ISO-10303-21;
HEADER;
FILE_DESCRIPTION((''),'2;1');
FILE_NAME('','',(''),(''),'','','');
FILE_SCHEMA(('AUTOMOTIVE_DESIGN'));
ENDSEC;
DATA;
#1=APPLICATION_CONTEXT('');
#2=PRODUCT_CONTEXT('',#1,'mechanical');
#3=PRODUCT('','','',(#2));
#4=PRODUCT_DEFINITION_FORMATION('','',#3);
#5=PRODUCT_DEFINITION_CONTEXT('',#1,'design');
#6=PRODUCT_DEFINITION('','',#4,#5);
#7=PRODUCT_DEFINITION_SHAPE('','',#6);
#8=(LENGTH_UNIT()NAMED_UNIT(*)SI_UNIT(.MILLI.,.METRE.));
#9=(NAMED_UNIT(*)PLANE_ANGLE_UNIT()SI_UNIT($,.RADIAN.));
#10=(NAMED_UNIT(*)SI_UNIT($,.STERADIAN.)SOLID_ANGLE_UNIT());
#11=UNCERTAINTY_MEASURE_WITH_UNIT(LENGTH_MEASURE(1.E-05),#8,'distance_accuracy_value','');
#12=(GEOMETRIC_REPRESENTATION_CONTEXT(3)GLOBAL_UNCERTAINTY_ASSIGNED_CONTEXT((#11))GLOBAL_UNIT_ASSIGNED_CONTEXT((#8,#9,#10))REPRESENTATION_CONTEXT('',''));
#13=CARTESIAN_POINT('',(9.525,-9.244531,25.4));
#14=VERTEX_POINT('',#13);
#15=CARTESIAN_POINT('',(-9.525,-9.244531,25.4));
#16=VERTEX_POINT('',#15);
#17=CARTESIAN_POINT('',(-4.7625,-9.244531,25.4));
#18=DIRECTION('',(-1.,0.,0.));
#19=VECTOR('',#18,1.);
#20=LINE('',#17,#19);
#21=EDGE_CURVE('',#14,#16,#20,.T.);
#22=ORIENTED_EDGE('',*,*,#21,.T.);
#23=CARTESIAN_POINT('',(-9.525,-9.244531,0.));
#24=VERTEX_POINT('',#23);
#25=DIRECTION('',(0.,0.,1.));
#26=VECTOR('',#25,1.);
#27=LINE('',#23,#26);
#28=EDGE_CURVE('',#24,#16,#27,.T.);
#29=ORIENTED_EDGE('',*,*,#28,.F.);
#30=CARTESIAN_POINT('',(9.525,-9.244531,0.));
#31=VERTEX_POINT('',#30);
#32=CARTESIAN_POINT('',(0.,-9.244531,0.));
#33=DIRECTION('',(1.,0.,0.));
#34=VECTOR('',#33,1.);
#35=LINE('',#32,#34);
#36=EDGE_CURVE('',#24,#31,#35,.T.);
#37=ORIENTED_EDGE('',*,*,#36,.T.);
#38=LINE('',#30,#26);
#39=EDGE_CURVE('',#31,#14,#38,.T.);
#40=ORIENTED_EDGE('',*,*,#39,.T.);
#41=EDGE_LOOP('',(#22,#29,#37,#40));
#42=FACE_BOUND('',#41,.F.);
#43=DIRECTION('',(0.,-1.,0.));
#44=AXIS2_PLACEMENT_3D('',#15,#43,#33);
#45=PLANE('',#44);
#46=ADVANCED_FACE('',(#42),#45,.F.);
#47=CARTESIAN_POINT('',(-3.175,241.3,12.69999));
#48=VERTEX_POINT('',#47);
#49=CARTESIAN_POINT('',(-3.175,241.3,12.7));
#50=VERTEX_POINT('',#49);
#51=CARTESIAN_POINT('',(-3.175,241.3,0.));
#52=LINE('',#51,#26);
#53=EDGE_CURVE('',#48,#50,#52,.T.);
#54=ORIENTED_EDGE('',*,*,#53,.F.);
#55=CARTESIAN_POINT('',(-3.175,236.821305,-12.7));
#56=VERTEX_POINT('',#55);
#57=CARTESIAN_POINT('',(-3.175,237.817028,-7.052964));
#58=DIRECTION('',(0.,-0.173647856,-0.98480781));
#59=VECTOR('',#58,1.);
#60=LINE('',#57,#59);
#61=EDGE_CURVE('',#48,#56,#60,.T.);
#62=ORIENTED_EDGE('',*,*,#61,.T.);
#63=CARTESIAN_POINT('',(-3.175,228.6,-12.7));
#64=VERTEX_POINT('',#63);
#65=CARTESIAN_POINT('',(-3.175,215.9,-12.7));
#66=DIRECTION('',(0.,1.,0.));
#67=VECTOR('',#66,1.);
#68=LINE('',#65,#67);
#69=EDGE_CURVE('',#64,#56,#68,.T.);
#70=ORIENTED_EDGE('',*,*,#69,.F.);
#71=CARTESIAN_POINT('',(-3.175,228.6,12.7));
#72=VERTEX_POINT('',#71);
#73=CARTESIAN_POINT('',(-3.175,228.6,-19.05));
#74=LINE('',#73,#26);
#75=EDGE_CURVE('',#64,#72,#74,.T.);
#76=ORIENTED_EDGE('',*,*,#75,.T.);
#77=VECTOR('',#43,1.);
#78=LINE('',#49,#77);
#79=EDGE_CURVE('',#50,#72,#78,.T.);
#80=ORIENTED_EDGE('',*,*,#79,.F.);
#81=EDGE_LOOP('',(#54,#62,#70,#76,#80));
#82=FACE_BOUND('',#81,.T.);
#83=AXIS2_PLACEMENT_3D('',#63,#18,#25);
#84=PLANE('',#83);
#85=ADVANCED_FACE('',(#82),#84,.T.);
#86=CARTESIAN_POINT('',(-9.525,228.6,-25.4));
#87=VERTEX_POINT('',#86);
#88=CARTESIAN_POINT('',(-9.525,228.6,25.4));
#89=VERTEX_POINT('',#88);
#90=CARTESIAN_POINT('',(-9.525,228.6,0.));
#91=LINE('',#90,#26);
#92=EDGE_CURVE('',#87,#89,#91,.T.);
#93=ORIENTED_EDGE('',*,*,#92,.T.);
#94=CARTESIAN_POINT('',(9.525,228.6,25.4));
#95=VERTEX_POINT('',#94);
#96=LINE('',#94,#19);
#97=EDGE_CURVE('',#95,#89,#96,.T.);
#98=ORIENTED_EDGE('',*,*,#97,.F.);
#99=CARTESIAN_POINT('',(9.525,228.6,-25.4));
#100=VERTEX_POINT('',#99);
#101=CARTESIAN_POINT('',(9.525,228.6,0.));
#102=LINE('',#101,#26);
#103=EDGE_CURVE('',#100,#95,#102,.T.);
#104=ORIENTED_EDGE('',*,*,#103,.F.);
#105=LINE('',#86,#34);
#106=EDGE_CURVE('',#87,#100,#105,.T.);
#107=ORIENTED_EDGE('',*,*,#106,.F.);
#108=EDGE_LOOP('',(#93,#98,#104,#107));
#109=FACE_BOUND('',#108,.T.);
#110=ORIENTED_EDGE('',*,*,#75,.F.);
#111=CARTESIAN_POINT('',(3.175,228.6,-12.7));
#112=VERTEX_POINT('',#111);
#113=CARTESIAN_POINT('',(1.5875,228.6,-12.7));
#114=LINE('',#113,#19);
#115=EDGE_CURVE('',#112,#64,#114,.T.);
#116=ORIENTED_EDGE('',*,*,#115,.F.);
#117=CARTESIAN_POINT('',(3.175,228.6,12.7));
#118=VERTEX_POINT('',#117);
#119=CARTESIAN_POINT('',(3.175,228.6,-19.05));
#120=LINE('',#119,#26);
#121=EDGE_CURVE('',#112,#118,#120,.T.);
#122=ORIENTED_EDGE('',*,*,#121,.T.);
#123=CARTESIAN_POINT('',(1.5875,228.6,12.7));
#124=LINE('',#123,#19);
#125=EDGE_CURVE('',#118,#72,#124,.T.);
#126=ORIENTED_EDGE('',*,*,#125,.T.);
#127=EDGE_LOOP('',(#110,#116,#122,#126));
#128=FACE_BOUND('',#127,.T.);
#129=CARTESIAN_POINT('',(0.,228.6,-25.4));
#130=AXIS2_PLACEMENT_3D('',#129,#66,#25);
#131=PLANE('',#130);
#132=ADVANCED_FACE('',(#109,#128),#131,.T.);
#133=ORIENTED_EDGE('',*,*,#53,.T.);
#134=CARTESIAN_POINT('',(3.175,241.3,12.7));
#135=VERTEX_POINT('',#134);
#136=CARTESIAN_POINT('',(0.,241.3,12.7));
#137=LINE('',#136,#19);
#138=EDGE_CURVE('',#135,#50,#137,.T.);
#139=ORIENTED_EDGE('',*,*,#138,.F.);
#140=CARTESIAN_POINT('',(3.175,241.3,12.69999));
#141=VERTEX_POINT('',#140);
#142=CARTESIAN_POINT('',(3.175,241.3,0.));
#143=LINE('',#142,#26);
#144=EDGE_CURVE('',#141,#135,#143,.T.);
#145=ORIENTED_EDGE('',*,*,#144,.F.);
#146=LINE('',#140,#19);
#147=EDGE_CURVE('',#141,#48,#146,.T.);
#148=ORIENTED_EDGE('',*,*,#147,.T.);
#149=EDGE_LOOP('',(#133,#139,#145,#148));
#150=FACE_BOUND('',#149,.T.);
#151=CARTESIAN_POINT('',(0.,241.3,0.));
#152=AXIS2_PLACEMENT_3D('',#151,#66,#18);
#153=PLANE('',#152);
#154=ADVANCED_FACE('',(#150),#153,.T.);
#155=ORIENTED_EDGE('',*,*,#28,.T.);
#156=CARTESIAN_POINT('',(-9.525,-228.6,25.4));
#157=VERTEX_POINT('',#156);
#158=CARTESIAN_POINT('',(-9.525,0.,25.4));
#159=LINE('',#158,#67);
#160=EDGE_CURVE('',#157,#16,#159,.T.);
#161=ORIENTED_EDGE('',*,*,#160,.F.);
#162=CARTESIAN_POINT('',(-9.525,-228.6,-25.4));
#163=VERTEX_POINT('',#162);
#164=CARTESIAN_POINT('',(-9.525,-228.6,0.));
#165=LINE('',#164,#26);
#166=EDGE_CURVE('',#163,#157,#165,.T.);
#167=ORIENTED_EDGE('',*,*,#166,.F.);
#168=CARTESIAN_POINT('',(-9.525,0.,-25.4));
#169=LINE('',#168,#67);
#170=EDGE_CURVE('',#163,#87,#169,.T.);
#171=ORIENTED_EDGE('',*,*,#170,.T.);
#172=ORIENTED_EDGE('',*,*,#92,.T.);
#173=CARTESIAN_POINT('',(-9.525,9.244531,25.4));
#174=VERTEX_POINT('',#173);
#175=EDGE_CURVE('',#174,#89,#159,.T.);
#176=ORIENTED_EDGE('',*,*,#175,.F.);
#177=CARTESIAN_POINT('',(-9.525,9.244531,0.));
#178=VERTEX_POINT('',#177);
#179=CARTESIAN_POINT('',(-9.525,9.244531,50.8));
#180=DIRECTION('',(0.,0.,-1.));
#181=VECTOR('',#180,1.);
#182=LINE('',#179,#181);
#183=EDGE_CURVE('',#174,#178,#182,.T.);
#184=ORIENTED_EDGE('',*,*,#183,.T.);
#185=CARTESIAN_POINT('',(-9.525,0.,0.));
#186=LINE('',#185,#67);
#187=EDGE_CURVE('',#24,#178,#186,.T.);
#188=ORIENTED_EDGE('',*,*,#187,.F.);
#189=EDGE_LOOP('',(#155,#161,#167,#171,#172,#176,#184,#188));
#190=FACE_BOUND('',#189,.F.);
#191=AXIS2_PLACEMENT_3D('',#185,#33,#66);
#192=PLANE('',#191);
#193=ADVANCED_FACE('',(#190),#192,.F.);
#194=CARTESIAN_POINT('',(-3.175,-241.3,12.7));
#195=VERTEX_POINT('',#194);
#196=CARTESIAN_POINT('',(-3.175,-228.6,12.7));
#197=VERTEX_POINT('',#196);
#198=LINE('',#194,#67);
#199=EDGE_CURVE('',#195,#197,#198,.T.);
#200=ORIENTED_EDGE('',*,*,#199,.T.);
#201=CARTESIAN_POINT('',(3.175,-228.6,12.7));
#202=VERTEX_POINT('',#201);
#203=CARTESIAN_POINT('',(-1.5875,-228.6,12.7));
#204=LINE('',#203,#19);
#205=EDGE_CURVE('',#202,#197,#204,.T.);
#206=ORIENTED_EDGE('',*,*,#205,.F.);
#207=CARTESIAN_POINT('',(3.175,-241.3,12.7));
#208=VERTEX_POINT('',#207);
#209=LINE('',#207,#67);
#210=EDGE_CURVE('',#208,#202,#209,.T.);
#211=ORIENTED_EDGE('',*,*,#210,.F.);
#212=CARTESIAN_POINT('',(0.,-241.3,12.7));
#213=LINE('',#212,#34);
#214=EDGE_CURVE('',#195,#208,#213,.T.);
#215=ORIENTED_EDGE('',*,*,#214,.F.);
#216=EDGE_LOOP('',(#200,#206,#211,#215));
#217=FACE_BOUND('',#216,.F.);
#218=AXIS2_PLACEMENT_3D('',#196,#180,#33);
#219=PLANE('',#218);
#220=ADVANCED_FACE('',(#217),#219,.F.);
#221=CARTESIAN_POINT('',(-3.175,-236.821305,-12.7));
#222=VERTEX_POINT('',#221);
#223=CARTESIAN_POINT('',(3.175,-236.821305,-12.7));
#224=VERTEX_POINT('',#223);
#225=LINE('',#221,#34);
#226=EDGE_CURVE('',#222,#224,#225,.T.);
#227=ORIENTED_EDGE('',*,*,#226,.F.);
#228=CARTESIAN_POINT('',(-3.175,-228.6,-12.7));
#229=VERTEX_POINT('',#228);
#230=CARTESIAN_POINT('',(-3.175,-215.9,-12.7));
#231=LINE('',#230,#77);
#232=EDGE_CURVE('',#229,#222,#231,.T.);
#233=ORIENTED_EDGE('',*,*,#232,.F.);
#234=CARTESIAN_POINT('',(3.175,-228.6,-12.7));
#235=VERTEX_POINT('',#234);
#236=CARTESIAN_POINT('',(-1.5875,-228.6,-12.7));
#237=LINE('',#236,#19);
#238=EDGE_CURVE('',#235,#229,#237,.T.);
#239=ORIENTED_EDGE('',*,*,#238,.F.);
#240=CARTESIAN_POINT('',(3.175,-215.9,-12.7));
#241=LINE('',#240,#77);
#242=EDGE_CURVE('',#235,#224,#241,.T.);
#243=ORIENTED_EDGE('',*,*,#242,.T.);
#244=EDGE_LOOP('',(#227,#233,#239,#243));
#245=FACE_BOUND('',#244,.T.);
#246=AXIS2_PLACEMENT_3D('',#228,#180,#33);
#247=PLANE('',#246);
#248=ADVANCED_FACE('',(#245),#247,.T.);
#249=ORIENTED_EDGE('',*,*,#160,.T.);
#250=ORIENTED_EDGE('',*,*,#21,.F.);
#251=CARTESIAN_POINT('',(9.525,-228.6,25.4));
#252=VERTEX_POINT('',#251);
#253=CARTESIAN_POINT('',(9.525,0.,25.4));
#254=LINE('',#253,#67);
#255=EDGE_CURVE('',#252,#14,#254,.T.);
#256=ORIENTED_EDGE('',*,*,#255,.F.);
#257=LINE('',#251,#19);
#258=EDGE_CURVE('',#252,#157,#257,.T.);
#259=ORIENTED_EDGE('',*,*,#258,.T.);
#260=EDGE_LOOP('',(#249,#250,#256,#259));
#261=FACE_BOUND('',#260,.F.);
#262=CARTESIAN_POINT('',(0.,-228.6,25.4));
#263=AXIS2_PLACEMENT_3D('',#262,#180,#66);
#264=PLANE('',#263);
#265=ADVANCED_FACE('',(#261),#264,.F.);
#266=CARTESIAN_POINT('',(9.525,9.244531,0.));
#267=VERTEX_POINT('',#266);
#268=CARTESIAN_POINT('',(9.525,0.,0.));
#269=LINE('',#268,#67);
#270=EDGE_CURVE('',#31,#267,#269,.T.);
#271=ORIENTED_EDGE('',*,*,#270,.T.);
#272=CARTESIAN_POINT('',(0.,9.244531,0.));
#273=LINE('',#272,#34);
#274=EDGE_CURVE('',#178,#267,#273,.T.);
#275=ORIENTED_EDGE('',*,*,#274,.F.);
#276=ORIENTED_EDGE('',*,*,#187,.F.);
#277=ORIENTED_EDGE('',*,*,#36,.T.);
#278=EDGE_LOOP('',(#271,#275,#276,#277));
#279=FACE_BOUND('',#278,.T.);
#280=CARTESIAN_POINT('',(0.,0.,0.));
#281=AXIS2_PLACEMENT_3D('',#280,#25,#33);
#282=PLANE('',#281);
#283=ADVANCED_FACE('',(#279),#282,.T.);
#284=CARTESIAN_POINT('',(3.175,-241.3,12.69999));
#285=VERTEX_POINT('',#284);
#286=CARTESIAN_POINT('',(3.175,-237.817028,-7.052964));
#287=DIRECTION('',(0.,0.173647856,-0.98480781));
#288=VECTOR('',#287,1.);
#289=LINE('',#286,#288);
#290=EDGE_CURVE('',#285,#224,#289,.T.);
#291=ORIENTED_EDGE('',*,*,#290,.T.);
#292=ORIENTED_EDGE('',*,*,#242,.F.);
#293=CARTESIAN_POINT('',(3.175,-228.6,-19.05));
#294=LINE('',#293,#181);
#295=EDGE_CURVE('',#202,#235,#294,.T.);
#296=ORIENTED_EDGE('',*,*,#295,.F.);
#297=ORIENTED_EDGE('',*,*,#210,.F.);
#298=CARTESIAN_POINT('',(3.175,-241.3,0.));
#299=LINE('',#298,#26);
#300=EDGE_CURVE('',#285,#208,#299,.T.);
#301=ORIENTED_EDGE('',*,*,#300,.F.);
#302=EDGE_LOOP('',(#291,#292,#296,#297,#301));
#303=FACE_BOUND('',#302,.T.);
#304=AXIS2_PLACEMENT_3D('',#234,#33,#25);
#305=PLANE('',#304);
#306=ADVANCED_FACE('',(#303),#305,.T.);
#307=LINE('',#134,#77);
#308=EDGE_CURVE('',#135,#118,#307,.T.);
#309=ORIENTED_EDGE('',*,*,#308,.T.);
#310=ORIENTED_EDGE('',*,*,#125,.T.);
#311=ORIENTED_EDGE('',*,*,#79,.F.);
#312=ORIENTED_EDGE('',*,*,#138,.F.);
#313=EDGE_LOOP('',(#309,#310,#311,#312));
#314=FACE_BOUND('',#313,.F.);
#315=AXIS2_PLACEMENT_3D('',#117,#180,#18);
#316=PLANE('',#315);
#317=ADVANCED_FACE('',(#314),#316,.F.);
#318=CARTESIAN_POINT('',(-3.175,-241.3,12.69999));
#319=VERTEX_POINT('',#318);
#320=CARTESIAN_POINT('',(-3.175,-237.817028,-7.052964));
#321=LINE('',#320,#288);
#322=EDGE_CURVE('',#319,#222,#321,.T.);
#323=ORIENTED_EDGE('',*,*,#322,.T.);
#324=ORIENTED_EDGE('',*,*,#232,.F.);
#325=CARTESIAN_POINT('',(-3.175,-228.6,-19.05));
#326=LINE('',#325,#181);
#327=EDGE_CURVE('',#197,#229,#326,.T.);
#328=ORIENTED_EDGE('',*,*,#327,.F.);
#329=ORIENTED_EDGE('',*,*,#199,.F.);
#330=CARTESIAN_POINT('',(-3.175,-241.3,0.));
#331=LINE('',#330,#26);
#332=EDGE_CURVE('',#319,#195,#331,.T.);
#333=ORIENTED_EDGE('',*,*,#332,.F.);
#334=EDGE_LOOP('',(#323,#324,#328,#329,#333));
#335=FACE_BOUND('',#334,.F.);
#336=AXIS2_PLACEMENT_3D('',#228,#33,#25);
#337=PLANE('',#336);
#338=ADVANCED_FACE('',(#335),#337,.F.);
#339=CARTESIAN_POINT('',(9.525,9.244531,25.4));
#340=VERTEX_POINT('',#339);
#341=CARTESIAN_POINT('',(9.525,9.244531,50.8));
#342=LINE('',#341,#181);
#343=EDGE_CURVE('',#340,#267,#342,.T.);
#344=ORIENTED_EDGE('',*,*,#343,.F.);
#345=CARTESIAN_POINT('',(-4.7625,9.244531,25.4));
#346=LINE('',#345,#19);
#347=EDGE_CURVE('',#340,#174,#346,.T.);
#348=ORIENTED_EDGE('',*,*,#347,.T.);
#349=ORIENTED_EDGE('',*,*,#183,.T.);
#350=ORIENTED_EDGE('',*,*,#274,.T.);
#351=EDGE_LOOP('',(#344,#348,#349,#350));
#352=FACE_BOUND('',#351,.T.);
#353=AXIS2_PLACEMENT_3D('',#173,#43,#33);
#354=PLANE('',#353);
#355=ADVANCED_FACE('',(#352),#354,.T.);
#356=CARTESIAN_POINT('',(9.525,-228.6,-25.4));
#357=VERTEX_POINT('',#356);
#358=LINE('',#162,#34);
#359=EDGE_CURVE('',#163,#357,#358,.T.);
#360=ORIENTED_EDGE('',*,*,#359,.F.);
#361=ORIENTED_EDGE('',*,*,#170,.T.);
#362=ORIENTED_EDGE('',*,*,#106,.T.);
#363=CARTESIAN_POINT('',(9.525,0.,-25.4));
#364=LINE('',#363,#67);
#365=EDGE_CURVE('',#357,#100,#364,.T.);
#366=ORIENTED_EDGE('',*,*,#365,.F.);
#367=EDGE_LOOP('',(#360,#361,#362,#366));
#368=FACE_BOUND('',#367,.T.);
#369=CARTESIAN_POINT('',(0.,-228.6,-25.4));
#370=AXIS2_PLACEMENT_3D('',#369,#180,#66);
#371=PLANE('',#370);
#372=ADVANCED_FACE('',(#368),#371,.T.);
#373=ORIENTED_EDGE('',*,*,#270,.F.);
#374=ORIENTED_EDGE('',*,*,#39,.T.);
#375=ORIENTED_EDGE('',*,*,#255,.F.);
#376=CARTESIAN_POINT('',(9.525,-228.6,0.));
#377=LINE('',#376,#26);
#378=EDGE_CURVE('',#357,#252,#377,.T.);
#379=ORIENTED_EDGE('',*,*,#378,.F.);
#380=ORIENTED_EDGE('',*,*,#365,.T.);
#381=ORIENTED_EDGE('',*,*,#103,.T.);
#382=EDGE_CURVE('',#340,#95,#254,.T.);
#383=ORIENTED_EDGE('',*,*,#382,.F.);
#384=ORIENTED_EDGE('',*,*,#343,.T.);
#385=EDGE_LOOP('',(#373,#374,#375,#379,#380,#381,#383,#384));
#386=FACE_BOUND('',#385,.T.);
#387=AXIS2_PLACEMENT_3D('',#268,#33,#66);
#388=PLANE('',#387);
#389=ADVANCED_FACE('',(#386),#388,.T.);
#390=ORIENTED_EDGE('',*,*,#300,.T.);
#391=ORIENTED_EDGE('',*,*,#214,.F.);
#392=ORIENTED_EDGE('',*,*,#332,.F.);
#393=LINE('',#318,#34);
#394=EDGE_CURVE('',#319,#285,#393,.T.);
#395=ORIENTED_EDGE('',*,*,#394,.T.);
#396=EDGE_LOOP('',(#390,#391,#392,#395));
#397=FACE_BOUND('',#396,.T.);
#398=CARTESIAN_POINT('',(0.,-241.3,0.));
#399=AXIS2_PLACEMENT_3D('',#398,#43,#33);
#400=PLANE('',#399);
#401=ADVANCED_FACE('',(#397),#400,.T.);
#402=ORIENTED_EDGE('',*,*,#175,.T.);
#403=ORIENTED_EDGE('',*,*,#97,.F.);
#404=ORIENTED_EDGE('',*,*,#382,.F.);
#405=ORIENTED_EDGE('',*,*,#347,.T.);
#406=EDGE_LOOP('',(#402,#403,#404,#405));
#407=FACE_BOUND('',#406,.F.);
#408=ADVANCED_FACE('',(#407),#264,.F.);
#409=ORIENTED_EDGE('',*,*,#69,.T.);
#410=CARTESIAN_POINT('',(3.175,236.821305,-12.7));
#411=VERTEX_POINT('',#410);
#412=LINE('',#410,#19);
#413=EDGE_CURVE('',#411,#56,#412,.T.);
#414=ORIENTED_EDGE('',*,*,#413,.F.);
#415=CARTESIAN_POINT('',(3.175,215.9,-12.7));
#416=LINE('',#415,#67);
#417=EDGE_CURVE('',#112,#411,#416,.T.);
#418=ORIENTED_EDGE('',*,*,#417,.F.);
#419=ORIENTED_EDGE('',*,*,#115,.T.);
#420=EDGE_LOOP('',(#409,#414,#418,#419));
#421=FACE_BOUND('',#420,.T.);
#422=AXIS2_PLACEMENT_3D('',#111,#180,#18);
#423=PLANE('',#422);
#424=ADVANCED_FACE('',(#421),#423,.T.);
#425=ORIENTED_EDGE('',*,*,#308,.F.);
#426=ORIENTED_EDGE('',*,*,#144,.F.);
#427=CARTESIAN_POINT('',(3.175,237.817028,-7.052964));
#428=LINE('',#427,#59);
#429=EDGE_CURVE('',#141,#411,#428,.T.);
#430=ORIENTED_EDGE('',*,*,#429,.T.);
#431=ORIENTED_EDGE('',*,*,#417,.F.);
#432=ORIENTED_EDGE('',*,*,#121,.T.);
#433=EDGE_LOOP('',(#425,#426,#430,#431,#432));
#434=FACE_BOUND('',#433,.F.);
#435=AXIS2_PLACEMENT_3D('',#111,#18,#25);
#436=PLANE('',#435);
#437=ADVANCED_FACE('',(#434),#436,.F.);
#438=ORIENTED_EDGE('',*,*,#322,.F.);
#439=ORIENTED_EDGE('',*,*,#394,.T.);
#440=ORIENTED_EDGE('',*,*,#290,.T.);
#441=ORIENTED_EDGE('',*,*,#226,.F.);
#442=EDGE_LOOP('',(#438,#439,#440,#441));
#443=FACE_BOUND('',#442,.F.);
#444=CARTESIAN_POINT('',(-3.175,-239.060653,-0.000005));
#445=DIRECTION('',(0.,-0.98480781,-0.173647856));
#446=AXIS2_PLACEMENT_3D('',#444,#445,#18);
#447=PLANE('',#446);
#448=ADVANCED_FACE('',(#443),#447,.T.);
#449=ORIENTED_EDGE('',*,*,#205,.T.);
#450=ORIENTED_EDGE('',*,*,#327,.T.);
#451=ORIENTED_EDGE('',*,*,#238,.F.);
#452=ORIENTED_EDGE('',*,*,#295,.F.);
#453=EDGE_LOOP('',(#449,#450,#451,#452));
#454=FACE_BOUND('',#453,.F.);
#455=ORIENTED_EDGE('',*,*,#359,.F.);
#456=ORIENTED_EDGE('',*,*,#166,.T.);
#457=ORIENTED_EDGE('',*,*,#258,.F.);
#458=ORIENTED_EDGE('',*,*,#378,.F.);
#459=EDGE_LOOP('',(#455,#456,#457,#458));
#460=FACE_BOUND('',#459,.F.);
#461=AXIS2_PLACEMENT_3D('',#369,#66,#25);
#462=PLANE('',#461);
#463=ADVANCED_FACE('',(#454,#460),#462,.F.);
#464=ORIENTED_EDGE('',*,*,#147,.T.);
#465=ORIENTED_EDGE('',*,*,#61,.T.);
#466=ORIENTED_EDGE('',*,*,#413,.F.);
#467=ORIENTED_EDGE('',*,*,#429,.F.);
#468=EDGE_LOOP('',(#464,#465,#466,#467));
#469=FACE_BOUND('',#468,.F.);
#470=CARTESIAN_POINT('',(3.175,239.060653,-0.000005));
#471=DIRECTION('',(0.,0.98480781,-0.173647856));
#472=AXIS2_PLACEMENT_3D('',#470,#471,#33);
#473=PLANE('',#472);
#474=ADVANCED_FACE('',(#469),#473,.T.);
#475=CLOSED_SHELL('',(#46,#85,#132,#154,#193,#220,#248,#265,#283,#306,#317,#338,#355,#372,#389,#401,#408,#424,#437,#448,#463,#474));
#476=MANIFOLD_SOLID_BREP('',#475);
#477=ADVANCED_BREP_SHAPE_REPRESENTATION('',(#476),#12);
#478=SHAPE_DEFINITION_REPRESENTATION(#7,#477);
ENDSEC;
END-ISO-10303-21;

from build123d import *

# Parameters (mm, degrees)
F0_W     = 457.2
F0_H     = 50.8
F1_DEPTH = 9.525
F2_W     = 19.05
F2_H     = 18.4890627861
F3_DEPTH = 25.4
F4_W     = 6.35
F4_H     = 25.4
F5_DEPTH = 12.7
F6_W     = 6.35
F6_H     = 25.4
F7_DEPTH = 12.7
F8_SIZE2 = 4.478695
F8_SIZE  = 25.39999
F9_SIZE2 = 4.478695
F9_SIZE  = 25.39999


# Not quite as in the source:
# - a fillet or chamfer is up to 0.001 mm smaller than in the source, because OpenCascade refuses the exact size


with BuildPart() as f1:
    # F0 (on Right) → F1 (new body, symmetric)
    with BuildSketch(Plane.YZ):
        Rectangle(F0_W, F0_H)
    extrude(amount=F1_DEPTH, both=True)

    # F2 (on face) → F3 (cut, symmetric)
    with BuildSketch(Plane.XY.offset(25.4)):
        Rectangle(F2_W, F2_H)
    extrude(amount=F3_DEPTH, both=True, mode=Mode.SUBTRACT)

    # F4 (on face) → F5 (join, symmetric)
    with BuildSketch(Plane.XZ.offset(228.6)):
        Rectangle(F4_W, F4_H)
    extrude(amount=F5_DEPTH, both=True)

    # F6 (on face) → F7 (join, symmetric)
    with BuildSketch(Plane(origin=(0, 228.6, 0), x_dir=(-1, 0, 0), z_dir=(0, 1, 0))):
        Rectangle(F6_W, F6_H)
    extrude(amount=F7_DEPTH, both=True)

    # F8 (size 25.4 and 4.47870531 in the source; OpenCascade refuses exactly that, so slightly less here)
    f8_edges = [f1.edges().sort_by_distance(p)[0] for p in [
        (0, 241.3, -12.7),
    ]]
    f8_side = f1.faces().sort_by_distance((0, 241.3, 0))[0]
    chamfer(f8_edges, length=F8_SIZE, length2=F8_SIZE2, reference=f8_side)

    # F9 (size 25.4 and 4.47870531 in the source; OpenCascade refuses exactly that, so slightly less here)
    f9_edges = [f1.edges().sort_by_distance(p)[0] for p in [
        (0, -241.3, -12.7),
    ]]
    f9_side = f1.faces().sort_by_distance((0, -241.3, 0))[0]
    chamfer(f9_edges, length=F9_SIZE, length2=F9_SIZE2, reference=f9_side)


solid = f1.part
